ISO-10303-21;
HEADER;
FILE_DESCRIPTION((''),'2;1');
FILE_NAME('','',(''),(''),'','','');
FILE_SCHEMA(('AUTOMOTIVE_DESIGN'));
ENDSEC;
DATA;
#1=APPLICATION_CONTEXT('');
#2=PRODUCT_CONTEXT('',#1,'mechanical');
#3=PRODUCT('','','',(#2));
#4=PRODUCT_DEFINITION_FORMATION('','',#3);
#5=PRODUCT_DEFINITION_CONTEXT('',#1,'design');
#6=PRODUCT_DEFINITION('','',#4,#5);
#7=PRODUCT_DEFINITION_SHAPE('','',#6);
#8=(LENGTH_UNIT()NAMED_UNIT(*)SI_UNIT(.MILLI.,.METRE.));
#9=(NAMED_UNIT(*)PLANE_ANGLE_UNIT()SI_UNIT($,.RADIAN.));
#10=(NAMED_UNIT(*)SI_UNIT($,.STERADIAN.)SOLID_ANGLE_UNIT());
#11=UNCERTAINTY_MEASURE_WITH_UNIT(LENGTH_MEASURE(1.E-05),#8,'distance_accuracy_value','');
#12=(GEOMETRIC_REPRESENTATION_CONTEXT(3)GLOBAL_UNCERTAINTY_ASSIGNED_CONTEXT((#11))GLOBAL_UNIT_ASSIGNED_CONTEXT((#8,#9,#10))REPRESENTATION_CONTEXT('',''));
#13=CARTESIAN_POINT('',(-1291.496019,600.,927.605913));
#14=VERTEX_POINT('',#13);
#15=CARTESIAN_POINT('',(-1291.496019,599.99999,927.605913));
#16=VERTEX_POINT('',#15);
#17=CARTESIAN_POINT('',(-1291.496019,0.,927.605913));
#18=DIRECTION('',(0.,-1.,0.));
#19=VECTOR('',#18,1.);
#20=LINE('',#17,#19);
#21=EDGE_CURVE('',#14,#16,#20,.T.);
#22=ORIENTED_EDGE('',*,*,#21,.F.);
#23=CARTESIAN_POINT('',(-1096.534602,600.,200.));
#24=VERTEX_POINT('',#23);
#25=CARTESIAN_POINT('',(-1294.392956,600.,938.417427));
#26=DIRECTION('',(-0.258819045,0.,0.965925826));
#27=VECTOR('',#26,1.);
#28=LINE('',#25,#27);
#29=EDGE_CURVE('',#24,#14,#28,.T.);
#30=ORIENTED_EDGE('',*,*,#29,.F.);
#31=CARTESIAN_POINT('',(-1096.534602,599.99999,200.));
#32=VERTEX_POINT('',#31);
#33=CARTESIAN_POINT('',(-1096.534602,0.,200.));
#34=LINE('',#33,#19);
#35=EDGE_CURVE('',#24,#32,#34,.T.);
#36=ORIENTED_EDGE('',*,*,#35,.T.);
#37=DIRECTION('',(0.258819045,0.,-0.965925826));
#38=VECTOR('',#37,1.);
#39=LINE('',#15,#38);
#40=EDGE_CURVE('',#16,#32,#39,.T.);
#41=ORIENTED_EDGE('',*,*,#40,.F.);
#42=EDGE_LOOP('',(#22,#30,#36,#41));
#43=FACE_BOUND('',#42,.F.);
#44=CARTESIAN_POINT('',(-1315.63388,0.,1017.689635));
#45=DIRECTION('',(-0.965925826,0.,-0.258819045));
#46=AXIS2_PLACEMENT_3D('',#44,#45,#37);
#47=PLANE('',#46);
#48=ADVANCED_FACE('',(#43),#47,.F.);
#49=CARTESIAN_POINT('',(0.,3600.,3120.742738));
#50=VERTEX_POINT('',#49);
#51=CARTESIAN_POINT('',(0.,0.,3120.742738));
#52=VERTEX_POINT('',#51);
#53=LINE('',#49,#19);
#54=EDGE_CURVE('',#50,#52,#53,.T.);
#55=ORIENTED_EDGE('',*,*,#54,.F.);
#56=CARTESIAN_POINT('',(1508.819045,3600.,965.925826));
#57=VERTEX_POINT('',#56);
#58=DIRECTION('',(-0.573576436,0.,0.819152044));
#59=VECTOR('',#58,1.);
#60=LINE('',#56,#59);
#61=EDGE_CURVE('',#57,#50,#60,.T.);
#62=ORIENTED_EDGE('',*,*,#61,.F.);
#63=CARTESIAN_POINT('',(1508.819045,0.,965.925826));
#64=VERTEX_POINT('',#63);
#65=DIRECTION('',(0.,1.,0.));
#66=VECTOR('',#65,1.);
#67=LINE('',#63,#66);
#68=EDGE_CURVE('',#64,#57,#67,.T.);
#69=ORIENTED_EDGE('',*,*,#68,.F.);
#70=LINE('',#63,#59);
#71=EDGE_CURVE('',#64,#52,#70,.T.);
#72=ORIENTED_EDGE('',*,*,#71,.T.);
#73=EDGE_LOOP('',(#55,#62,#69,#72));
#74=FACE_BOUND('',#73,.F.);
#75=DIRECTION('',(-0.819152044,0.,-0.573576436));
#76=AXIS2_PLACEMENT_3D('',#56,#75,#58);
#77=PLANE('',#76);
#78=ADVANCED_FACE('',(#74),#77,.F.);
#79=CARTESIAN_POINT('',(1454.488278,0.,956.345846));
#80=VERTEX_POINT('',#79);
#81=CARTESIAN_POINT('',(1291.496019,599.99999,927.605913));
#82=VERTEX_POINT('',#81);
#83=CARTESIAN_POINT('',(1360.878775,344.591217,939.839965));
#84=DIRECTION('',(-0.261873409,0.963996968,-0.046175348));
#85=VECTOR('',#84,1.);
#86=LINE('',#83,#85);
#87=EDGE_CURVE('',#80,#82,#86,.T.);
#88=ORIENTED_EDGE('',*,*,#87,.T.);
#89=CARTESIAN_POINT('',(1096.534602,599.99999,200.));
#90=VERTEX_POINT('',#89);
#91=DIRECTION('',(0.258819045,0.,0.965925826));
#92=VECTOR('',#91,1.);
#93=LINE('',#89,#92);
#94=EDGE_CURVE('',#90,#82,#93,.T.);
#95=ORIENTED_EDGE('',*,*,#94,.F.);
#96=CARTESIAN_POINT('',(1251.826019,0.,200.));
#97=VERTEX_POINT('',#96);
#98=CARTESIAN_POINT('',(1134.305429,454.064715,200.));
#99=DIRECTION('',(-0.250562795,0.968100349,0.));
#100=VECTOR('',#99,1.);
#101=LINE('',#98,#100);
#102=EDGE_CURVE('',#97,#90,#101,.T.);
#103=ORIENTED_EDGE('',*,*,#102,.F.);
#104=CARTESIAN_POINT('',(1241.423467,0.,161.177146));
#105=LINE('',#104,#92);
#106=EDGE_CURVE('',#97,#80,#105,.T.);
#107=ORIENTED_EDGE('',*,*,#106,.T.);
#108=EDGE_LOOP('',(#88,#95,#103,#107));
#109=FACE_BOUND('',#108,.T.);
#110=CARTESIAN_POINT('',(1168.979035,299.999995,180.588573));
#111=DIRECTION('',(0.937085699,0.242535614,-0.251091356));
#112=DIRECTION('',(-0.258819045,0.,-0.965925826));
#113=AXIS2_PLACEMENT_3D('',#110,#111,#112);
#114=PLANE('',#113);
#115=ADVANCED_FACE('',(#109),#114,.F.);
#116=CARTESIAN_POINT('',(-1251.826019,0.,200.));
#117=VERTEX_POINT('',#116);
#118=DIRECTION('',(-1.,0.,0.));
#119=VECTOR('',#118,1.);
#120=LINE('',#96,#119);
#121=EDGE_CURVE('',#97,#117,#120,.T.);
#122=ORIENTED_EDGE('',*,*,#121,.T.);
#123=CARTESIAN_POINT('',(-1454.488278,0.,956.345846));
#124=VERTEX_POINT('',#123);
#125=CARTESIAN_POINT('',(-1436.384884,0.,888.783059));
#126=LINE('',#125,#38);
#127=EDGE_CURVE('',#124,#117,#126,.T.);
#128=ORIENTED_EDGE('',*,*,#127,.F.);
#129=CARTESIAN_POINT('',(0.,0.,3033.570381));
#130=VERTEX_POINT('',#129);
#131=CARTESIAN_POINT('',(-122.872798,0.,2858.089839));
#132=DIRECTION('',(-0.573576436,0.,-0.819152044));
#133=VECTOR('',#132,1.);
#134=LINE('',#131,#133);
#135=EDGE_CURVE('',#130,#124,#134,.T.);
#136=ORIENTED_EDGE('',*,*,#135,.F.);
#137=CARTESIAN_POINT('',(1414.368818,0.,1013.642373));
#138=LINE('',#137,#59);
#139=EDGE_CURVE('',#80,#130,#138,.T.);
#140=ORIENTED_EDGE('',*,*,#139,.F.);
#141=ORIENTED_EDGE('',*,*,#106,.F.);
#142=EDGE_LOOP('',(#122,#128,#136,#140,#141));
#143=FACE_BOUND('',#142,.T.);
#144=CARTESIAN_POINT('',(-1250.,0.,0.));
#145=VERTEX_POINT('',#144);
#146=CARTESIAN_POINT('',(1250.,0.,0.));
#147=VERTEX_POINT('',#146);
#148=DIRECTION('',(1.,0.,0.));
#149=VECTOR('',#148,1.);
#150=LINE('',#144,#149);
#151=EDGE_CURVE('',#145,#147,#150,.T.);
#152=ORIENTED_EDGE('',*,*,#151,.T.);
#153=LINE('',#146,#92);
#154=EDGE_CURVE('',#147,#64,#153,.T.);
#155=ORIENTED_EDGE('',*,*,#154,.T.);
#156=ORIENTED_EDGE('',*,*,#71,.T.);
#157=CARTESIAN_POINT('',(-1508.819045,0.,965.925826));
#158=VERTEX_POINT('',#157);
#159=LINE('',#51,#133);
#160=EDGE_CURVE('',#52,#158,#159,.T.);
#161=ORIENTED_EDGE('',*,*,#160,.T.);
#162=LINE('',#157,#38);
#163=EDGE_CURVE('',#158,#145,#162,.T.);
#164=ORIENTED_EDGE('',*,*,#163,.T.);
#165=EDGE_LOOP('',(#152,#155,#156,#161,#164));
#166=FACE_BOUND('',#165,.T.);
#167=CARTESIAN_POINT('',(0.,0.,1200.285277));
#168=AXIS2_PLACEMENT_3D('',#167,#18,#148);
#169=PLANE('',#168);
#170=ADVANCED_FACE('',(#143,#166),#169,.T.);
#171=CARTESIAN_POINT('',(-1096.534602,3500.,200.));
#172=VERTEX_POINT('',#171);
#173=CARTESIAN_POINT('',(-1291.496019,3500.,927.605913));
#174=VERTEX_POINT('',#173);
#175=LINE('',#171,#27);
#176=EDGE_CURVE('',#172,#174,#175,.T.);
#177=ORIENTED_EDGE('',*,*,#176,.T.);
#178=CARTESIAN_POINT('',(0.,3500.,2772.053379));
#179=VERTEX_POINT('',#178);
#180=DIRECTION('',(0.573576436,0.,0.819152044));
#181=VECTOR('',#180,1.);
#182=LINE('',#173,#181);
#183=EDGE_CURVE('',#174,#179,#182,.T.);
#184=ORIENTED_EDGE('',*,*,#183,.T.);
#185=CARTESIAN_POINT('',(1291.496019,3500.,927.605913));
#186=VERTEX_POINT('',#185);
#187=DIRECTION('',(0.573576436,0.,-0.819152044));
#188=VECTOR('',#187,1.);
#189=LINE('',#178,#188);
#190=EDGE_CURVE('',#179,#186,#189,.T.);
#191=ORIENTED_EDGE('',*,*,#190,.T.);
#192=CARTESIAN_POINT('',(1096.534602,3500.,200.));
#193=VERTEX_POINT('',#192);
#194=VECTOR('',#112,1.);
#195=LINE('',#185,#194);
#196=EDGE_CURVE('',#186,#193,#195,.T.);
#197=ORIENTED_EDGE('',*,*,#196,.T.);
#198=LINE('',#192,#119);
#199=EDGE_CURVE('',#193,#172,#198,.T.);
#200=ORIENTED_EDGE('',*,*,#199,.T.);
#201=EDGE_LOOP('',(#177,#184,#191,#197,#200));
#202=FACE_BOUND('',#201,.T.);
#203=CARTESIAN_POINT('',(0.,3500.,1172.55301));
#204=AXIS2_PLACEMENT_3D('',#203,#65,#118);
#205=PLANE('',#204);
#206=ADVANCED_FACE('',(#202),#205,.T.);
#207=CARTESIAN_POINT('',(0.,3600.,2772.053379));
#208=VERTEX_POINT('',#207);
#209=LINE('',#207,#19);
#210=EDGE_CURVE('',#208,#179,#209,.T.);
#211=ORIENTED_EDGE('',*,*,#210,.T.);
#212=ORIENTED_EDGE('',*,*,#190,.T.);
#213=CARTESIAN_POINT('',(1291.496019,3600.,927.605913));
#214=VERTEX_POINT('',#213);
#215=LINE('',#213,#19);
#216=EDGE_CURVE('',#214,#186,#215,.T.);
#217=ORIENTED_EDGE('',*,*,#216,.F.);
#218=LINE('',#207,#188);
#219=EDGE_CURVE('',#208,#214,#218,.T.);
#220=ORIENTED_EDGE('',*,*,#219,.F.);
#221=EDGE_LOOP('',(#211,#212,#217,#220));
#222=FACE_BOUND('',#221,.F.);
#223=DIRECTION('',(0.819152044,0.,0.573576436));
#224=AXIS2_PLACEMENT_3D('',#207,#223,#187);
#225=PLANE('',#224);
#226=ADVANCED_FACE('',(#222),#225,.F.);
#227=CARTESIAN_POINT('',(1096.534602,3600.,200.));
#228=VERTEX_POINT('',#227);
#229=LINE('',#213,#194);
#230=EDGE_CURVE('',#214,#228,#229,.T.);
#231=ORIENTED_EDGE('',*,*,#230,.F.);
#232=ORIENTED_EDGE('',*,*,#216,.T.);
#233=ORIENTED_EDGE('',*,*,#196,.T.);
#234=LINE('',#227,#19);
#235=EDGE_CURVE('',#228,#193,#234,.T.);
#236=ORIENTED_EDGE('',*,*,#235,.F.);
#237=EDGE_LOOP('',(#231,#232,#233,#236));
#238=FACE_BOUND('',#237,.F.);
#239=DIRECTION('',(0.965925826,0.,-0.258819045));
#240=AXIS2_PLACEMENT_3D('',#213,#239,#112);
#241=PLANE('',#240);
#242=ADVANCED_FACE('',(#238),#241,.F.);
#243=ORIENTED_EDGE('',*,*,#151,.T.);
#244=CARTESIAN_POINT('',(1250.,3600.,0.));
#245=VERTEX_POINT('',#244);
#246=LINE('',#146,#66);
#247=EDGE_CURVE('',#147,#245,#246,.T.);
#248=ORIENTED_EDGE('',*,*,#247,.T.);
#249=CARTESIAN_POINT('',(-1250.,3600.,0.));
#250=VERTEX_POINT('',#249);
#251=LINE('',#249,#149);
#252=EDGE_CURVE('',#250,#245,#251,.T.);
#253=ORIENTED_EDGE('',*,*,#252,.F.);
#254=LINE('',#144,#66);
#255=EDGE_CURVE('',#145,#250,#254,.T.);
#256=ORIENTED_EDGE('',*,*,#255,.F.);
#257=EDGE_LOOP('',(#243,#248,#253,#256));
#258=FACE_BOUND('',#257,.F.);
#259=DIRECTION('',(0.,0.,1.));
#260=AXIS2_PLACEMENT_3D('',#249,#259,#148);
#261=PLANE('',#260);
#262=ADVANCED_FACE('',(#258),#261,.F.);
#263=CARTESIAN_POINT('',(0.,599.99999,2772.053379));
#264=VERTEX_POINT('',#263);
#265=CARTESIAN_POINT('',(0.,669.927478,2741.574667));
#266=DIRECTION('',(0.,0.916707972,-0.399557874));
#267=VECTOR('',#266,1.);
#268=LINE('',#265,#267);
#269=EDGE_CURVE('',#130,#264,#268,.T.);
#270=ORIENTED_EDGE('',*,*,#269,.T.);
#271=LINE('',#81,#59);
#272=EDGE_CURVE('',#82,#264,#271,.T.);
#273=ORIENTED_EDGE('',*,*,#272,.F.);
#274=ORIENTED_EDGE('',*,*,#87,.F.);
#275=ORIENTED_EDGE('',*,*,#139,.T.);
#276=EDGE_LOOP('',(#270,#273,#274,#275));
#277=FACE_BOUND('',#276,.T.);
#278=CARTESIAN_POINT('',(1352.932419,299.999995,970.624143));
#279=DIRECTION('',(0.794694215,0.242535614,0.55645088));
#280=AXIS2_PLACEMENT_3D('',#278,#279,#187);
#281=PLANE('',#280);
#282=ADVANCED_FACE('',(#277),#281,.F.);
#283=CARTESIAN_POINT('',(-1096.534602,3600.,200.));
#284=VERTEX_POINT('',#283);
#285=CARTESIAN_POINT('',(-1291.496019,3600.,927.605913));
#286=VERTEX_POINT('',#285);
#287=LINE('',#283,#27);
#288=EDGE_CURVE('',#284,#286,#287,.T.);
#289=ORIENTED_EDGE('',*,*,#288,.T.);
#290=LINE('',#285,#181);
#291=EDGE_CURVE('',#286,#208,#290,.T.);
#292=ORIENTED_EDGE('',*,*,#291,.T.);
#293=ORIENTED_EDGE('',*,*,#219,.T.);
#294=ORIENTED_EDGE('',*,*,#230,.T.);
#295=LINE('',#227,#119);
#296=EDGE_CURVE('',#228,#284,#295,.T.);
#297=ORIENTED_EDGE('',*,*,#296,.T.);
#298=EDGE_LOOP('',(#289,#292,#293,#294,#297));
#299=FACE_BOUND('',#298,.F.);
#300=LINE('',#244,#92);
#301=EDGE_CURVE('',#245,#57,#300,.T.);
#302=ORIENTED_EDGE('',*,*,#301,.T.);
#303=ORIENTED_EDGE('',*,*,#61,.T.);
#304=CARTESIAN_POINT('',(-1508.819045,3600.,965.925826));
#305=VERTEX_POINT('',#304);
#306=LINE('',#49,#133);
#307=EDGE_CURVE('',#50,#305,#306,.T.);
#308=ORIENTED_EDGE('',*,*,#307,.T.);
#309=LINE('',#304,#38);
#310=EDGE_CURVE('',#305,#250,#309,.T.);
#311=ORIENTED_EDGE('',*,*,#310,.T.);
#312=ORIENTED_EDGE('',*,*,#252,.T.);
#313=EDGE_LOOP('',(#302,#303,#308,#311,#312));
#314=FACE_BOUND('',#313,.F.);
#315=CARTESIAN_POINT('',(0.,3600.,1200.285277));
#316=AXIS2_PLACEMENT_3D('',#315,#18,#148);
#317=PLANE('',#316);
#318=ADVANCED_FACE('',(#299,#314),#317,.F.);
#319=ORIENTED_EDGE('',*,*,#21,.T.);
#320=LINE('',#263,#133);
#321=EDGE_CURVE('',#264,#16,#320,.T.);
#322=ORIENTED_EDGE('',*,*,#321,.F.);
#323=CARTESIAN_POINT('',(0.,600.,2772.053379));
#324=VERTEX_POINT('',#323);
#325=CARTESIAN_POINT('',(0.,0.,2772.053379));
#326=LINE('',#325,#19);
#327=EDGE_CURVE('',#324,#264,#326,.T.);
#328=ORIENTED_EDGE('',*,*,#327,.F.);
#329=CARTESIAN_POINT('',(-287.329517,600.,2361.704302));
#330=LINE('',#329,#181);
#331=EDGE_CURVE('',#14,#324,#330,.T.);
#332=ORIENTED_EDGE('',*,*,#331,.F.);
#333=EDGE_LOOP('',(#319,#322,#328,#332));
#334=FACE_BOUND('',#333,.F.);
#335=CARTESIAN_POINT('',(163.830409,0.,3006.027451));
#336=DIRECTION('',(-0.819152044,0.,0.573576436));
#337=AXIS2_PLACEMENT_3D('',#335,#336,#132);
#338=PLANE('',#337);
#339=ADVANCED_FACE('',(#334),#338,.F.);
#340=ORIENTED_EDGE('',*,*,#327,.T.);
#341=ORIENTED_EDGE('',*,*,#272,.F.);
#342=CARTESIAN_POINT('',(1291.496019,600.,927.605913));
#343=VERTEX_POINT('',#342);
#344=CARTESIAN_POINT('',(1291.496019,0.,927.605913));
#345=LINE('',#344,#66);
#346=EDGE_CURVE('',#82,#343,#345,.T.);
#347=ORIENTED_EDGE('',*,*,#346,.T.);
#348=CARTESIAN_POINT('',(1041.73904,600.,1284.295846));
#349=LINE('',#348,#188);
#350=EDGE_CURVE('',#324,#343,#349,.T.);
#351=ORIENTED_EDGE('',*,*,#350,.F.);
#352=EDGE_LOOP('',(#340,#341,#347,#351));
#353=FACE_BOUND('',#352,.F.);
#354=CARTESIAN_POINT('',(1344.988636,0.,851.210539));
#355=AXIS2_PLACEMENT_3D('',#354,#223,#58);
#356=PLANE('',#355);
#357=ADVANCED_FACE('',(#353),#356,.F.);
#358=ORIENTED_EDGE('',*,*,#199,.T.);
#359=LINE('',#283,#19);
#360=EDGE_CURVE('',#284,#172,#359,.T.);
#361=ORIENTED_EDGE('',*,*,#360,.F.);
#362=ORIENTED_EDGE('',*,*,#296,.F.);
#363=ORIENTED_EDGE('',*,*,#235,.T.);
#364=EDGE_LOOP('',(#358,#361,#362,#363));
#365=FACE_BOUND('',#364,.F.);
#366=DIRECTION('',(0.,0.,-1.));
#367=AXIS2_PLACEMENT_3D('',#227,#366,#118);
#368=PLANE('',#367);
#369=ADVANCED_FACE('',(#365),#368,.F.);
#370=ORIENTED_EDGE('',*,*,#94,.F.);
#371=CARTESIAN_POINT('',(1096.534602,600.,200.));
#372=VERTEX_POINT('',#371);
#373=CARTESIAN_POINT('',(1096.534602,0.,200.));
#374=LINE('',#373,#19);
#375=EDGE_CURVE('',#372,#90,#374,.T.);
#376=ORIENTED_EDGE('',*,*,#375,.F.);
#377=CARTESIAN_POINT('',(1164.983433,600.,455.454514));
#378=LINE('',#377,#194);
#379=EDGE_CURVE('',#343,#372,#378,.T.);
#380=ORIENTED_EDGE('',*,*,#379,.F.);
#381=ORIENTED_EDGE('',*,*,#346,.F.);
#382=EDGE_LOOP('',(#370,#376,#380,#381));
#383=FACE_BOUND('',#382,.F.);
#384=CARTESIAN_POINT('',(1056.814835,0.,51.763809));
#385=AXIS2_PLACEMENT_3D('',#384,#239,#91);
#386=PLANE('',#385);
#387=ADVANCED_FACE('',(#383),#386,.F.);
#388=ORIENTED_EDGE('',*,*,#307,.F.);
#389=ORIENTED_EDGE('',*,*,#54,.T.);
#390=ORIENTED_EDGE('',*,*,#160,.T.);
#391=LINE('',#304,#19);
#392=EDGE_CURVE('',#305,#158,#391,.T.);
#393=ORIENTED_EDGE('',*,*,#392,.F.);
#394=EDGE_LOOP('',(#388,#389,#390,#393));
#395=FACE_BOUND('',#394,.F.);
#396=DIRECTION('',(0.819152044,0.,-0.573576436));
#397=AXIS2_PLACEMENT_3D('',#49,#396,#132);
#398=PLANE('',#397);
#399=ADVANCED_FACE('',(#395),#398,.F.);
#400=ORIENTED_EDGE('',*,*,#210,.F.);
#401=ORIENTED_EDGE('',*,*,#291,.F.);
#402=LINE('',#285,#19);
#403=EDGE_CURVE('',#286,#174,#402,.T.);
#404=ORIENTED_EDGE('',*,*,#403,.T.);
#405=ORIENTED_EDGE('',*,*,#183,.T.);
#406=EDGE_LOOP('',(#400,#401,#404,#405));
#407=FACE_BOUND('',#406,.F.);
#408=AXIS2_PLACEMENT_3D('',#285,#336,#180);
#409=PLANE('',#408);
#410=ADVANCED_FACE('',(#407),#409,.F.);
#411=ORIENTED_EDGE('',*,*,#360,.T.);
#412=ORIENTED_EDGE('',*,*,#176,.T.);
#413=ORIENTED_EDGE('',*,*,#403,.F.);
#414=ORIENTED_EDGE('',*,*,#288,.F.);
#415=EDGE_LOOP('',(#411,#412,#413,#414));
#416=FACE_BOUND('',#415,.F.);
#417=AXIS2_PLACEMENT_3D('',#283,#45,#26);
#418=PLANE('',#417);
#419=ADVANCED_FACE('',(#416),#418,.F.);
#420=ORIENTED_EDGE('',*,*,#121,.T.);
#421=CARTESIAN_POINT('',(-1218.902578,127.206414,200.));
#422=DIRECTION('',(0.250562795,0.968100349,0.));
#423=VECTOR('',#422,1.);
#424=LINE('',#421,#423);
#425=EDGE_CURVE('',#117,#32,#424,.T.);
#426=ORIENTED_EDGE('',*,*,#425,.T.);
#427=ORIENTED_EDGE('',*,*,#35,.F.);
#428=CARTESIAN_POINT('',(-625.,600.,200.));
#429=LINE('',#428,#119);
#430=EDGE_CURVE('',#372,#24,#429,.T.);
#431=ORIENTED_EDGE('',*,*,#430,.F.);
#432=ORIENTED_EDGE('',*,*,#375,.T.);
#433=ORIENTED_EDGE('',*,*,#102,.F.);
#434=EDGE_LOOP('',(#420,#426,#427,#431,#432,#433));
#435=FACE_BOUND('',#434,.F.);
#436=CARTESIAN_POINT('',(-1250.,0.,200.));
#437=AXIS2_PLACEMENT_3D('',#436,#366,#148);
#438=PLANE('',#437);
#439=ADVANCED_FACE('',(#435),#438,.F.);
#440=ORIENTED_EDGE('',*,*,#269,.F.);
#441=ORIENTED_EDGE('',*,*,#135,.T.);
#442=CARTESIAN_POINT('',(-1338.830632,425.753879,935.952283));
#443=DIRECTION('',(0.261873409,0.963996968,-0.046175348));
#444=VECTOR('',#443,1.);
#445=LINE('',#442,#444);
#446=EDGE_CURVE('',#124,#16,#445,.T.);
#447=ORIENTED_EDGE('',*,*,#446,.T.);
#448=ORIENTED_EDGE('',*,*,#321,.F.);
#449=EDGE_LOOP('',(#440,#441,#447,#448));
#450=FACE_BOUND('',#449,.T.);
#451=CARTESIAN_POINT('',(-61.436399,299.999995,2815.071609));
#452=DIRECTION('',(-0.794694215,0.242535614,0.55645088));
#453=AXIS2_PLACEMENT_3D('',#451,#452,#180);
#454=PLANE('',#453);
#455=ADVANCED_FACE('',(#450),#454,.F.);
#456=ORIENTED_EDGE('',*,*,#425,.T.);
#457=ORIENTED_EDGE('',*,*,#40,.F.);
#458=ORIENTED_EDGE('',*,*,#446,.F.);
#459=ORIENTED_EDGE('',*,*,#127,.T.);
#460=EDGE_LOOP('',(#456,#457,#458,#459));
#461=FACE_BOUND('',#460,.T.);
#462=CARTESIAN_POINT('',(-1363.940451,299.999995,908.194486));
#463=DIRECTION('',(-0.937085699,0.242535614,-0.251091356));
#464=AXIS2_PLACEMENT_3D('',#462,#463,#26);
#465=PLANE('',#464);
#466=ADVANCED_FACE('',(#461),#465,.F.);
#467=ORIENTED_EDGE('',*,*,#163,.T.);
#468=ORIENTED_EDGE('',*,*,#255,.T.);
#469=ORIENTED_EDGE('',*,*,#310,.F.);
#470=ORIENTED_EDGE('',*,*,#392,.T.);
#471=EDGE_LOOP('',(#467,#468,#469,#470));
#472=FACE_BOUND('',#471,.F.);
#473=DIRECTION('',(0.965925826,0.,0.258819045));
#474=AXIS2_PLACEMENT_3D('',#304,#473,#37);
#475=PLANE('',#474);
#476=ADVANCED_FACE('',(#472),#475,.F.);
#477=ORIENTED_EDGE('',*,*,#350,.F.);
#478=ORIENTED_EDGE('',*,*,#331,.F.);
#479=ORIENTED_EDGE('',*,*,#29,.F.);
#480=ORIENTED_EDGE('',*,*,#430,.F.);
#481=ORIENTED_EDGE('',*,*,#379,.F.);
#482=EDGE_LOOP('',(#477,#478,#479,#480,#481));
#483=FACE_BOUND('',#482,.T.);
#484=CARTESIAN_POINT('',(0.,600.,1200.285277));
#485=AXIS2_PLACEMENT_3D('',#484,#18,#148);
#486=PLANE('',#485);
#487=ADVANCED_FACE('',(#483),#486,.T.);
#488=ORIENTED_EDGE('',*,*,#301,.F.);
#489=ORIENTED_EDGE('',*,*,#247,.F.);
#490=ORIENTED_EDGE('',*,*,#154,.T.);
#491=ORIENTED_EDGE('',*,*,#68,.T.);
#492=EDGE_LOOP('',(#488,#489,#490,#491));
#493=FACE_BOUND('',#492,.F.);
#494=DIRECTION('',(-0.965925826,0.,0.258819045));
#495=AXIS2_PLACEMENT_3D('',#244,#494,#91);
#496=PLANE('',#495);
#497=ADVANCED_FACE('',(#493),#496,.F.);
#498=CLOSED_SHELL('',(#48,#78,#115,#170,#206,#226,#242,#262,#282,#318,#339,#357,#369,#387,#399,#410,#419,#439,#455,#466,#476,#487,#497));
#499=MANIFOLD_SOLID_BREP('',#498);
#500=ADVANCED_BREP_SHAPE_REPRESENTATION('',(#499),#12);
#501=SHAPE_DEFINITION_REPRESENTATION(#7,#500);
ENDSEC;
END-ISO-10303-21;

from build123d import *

# Parameters (mm, degrees)
F1_DEPTH = 3600
F2_T     = -200
F3_DEPTH = 3000
F4_SIZE2 = 599.99999
F4_SIZE  = 149.99999
F6_DEPTH = 100


# Not quite as in the source:
# - a fillet or chamfer is up to 0.001 mm smaller than in the source, because OpenCascade refuses the exact size


with BuildPart() as f1:
    # F0 (on Front) → F1 (new body)
    with BuildSketch(Plane.XZ):
        Polygon((1508.8190451025, 965.9258262891), (0, 3120.7427380868), (-1508.8190451025, 965.9258262891), (-1250, 0), (0, 0), (1250, 0), align=None)
    extrude(amount=-F1_DEPTH)

    # F2
    f2_openings = [f1.faces().sort_by_distance(p)[0] for p in [
        (0, 0, 1149.918376),
    ]]
    offset(amount=F2_T, openings=f2_openings)

    # F3 (add): a face of the model
    f3_faces = [f1.faces().sort_by_distance(p)[0] for p in [
        (0, 3600, 1149.9183758236),
    ]]
    extrude(f3_faces, amount=-F3_DEPTH)

    # F4 (size 150 and 600 in the source; OpenCascade refuses exactly that, so slightly less here)
    f4_edges = [f1.edges().sort_by_distance(p)[0] for p in [
        (-1194.015311, 0, 563.802957),
        (-645.74801, 0, 1849.829646),
        (645.74801, 0, 1849.829646),
        (1194.015311, 0, 563.802957),
    ]]
    f4_side = f1.faces().sort_by_distance((718.849289, 0, 2018.434739))[0]
    chamfer(f4_edges, length=F4_SIZE, length2=F4_SIZE2, reference=f4_side)

    # F5 (on face) → F6 (cut)
    with BuildSketch(Plane(origin=(0, 3600, 0), x_dir=(-1, 0, 0), z_dir=(0, 1, 0))):
        Polygon((0, 2772.0533789626), (-1291.4960192832, 927.6059133079), (-1096.5346024042, 200), (1096.5346024042, 200), (1291.4960192832, 927.6059133079), align=None)
    extrude(amount=-F6_DEPTH, mode=Mode.SUBTRACT)


solid = f1.part
